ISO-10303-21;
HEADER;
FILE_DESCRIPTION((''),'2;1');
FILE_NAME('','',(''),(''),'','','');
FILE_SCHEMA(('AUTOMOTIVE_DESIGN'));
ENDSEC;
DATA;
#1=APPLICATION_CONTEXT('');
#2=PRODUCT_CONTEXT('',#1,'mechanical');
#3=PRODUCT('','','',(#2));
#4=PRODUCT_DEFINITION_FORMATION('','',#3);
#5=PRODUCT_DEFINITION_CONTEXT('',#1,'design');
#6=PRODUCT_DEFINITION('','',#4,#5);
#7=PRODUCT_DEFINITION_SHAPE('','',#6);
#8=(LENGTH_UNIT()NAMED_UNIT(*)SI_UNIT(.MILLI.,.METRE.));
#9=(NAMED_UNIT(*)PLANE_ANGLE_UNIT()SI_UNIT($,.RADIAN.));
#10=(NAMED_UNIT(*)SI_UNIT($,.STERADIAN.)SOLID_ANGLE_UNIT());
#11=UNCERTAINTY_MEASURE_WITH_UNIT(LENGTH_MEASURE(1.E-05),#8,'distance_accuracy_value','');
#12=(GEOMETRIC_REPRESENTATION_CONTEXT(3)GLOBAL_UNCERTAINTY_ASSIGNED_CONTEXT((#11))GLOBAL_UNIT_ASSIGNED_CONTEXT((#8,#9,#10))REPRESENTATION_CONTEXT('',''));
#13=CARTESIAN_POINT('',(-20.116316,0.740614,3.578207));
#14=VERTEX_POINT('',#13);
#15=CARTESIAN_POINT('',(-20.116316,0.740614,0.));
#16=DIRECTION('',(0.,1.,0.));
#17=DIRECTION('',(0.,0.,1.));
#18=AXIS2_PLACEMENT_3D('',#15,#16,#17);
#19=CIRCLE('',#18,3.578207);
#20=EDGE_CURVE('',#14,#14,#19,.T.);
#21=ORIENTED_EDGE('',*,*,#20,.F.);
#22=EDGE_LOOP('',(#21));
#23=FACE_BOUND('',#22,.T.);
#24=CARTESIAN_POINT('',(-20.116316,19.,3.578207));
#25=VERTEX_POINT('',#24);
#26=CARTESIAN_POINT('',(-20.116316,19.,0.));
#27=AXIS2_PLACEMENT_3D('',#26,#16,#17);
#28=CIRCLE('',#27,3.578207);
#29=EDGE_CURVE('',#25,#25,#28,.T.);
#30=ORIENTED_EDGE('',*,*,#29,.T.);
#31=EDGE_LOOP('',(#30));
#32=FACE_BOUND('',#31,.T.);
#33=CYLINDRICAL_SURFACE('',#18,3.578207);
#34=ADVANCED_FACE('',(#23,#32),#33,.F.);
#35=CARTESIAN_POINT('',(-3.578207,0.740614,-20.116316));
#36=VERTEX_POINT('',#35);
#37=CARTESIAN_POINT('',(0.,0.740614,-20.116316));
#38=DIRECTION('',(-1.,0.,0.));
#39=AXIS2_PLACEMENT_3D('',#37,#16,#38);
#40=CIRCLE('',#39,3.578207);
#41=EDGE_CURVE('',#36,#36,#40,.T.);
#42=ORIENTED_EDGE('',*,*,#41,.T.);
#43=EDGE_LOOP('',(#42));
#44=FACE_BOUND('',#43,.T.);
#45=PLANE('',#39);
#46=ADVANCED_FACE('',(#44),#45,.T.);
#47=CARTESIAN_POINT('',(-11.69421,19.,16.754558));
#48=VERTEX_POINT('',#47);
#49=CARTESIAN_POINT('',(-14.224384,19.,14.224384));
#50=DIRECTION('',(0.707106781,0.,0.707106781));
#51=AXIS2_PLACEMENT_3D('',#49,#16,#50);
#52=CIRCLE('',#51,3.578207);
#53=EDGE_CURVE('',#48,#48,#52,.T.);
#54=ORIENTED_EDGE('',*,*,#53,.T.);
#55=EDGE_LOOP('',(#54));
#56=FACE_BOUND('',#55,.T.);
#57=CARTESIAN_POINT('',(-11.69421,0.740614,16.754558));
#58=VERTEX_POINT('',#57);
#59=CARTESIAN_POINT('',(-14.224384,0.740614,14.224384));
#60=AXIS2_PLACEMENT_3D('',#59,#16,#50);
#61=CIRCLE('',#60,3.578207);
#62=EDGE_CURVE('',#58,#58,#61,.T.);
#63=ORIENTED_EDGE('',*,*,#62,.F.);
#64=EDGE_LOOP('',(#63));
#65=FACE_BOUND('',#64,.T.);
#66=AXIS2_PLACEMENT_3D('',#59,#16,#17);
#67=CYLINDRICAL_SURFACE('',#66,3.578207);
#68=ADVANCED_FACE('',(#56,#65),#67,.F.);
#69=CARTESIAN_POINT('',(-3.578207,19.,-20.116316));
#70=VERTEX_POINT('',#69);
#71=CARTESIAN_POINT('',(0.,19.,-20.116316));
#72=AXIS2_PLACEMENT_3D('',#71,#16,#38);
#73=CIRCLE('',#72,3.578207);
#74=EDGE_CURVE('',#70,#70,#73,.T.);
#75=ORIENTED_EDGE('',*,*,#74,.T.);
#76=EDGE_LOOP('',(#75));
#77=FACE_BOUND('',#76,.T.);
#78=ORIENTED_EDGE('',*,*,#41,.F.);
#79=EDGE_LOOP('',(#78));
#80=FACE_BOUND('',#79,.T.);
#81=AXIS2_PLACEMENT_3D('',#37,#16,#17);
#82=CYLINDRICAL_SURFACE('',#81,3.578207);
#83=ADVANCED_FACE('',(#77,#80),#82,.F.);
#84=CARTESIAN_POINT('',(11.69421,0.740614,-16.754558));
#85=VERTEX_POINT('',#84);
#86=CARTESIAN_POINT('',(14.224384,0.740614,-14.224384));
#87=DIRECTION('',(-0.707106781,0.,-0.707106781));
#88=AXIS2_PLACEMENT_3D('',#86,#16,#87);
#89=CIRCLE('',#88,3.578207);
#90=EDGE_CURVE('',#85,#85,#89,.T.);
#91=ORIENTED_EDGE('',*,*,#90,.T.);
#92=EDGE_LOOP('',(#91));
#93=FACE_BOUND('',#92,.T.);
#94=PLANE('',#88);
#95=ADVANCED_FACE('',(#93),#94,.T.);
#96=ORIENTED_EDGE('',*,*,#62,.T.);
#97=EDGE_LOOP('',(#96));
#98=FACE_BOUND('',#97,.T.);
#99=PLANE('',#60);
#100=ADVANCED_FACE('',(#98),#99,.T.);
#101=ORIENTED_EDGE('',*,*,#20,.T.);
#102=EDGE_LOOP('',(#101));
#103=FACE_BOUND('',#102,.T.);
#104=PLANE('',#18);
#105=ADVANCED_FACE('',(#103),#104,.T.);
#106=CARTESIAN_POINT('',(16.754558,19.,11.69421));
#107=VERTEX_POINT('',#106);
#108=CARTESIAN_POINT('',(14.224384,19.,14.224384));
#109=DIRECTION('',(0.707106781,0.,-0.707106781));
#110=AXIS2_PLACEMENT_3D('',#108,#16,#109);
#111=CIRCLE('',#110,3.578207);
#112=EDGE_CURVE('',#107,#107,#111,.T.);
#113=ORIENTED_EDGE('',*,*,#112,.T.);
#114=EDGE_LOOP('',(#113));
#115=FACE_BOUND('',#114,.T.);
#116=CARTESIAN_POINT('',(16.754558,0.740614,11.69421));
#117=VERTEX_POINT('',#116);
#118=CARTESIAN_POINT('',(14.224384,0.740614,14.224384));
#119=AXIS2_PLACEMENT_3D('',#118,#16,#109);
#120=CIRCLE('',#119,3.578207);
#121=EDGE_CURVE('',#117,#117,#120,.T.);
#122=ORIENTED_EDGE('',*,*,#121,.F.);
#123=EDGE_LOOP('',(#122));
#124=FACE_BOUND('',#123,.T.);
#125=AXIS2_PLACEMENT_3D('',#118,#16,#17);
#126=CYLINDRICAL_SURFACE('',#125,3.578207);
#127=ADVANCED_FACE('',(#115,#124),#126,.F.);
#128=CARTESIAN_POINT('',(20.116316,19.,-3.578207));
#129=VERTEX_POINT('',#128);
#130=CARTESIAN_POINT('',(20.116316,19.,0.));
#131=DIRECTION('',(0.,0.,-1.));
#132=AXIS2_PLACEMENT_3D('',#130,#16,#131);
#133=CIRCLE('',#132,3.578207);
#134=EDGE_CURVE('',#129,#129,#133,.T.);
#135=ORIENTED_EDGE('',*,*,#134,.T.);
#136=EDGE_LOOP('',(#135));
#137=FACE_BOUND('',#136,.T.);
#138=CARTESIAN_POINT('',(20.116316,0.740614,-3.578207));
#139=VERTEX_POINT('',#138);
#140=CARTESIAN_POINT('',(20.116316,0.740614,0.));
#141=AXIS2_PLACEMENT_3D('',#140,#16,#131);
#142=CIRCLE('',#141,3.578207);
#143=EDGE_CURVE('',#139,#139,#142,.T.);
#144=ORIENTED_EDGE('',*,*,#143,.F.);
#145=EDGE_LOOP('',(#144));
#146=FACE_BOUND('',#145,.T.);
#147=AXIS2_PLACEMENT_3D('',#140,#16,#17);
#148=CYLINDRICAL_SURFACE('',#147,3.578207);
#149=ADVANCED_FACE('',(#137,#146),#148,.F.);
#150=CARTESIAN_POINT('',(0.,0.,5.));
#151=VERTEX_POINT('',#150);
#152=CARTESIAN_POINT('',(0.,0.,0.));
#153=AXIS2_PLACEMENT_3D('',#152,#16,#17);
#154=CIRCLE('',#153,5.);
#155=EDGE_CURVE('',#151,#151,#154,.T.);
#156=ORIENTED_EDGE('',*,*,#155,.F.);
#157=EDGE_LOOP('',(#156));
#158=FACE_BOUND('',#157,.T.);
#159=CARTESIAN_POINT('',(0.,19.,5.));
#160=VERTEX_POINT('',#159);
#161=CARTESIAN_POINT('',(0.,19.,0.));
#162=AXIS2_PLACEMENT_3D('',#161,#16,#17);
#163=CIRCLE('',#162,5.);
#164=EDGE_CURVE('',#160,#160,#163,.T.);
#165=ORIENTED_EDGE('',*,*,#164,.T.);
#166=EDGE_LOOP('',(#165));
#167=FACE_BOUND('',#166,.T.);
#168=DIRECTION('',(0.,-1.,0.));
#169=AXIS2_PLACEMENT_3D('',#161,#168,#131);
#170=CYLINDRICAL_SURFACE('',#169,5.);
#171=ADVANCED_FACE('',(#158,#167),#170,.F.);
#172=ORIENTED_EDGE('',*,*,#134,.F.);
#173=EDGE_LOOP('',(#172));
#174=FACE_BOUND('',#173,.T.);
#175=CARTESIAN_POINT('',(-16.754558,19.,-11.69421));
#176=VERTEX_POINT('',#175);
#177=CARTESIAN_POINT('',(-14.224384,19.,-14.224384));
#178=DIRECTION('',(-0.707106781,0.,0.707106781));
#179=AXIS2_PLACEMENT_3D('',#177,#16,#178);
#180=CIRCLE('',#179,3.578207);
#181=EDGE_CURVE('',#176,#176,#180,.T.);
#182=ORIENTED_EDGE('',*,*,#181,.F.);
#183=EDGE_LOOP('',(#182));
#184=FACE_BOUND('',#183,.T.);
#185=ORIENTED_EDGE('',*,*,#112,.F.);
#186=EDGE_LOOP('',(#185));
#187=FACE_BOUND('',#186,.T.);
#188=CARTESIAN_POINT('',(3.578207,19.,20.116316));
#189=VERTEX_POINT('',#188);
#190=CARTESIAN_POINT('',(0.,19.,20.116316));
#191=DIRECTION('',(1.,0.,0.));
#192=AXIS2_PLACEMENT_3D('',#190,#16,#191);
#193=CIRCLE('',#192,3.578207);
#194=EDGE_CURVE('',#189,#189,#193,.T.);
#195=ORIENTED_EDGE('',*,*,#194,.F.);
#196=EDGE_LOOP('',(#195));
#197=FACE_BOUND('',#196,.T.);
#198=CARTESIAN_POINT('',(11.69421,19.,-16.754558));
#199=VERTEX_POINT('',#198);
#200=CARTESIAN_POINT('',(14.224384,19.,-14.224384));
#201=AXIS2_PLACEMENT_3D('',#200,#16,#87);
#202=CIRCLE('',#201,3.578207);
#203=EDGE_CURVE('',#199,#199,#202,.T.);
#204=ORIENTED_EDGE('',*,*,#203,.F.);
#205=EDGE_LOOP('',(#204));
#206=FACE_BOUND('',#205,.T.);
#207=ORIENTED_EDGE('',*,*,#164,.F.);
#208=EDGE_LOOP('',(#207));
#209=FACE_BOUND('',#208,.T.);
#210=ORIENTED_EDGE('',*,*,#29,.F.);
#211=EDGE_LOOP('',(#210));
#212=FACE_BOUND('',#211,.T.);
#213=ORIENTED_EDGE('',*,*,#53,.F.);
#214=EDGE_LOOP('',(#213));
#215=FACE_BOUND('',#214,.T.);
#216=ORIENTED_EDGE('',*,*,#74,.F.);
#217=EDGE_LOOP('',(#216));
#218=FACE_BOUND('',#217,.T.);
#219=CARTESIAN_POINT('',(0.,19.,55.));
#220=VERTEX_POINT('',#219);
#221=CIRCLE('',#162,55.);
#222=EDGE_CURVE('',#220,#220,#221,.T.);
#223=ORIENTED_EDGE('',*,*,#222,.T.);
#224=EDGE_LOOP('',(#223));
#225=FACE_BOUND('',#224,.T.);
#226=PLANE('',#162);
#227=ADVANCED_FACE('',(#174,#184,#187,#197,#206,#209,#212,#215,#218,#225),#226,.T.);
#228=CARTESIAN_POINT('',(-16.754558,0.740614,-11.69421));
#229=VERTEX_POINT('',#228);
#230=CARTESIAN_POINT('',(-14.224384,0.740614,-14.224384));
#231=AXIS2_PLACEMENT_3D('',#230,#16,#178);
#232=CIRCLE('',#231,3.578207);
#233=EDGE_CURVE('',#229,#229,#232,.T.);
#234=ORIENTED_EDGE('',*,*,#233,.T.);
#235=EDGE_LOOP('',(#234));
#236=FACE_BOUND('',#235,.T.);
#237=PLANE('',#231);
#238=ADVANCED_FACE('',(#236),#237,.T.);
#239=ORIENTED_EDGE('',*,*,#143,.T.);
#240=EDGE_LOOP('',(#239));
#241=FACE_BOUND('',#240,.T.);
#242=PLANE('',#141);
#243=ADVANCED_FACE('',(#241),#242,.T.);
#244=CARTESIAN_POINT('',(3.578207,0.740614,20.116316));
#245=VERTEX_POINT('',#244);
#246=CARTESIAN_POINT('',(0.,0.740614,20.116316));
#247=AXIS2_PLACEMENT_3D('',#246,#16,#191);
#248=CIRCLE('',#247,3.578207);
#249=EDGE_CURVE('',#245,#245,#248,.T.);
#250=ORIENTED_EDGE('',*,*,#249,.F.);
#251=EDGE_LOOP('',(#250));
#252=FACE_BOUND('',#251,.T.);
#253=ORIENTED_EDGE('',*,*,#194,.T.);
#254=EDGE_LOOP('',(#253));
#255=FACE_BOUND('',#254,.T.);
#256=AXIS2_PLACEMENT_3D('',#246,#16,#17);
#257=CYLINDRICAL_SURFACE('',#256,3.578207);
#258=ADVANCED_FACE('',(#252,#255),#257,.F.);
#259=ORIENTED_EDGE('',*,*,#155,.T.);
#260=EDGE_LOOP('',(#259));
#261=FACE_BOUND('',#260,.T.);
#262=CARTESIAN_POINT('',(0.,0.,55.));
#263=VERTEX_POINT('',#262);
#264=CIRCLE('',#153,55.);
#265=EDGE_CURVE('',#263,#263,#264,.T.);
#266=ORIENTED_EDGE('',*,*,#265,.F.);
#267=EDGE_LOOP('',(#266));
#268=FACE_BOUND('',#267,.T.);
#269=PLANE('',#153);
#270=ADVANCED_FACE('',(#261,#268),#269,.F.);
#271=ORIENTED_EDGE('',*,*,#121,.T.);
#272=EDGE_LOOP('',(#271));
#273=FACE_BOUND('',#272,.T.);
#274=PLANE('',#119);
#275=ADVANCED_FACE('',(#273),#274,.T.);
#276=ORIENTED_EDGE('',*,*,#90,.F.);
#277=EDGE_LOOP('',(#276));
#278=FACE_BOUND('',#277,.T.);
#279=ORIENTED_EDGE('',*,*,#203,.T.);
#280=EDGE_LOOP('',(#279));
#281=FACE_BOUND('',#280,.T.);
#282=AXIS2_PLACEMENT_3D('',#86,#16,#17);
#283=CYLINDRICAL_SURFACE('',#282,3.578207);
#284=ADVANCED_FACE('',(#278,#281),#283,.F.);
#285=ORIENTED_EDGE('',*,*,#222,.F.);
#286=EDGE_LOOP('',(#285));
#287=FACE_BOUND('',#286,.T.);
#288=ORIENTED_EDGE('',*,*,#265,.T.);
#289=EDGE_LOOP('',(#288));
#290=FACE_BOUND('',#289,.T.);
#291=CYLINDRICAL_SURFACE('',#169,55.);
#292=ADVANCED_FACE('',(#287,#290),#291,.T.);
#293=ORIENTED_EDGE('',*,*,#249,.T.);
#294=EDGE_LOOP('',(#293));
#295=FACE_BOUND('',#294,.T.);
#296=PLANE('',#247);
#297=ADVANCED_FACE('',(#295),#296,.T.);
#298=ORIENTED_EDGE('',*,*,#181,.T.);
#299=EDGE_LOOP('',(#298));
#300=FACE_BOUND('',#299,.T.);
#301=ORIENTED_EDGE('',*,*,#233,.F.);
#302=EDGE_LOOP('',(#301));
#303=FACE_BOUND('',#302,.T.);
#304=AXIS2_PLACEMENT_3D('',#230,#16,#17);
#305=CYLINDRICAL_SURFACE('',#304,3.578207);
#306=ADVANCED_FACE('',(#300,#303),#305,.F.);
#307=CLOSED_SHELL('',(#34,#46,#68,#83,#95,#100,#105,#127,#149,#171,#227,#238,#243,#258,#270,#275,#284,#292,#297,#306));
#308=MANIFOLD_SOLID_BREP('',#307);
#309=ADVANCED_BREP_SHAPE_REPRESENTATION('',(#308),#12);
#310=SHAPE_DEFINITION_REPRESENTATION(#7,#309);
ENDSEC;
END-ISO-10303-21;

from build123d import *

# Parameters (mm, degrees)
SKETCH1_R           = 55
BOSS_EXTRUDE1_DEPTH = 19
SKETCH2_R           = 5
CUT_EXTRUDE1_DEPTH  = 81.068720484
SKETCH3_R           = 3.578206539
CUT_EXTRUDE2_DEPTH  = 18.259386029
CIRPATTERN1_COUNT   = 8


with BuildPart() as part:
    # Sketch1 → Boss-Extrude1 (new body)
    with BuildSketch(Plane(origin=(0, 0, 0), x_dir=(1, 0, 0), z_dir=(0, 1, 0))):
        Circle(SKETCH1_R)
    extrude(amount=BOSS_EXTRUDE1_DEPTH)

    # Sketch2 → Cut-Extrude1 (cut, through all)
    with BuildSketch(Plane(origin=(0, 0, 0), x_dir=(1, 0, 0), z_dir=(0, 1, 0))):
        Circle(SKETCH2_R)
    extrude(amount=CUT_EXTRUDE1_DEPTH, mode=Mode.SUBTRACT)

    # Sketch3 → Cut-Extrude2 (cut)
    with BuildSketch(Plane(origin=(0, 19, 0), x_dir=(1, 0, 0), z_dir=(0, 1, 0))):
        with Locations((-20.116316415, 0)):
            Circle(SKETCH3_R)
    cut_extrude2 = extrude(amount=-CUT_EXTRUDE2_DEPTH, mode=Mode.SUBTRACT)

    # CirPattern1: Cut-Extrude2 ×8 about axis
    cirpattern1_axis = Axis((0, 0, 0), (0, 1, 0))
    for i in range(1, CIRPATTERN1_COUNT):
        add(cut_extrude2.rotate(cirpattern1_axis, i * 360 / CIRPATTERN1_COUNT), mode=Mode.SUBTRACT)


solid = part.part
